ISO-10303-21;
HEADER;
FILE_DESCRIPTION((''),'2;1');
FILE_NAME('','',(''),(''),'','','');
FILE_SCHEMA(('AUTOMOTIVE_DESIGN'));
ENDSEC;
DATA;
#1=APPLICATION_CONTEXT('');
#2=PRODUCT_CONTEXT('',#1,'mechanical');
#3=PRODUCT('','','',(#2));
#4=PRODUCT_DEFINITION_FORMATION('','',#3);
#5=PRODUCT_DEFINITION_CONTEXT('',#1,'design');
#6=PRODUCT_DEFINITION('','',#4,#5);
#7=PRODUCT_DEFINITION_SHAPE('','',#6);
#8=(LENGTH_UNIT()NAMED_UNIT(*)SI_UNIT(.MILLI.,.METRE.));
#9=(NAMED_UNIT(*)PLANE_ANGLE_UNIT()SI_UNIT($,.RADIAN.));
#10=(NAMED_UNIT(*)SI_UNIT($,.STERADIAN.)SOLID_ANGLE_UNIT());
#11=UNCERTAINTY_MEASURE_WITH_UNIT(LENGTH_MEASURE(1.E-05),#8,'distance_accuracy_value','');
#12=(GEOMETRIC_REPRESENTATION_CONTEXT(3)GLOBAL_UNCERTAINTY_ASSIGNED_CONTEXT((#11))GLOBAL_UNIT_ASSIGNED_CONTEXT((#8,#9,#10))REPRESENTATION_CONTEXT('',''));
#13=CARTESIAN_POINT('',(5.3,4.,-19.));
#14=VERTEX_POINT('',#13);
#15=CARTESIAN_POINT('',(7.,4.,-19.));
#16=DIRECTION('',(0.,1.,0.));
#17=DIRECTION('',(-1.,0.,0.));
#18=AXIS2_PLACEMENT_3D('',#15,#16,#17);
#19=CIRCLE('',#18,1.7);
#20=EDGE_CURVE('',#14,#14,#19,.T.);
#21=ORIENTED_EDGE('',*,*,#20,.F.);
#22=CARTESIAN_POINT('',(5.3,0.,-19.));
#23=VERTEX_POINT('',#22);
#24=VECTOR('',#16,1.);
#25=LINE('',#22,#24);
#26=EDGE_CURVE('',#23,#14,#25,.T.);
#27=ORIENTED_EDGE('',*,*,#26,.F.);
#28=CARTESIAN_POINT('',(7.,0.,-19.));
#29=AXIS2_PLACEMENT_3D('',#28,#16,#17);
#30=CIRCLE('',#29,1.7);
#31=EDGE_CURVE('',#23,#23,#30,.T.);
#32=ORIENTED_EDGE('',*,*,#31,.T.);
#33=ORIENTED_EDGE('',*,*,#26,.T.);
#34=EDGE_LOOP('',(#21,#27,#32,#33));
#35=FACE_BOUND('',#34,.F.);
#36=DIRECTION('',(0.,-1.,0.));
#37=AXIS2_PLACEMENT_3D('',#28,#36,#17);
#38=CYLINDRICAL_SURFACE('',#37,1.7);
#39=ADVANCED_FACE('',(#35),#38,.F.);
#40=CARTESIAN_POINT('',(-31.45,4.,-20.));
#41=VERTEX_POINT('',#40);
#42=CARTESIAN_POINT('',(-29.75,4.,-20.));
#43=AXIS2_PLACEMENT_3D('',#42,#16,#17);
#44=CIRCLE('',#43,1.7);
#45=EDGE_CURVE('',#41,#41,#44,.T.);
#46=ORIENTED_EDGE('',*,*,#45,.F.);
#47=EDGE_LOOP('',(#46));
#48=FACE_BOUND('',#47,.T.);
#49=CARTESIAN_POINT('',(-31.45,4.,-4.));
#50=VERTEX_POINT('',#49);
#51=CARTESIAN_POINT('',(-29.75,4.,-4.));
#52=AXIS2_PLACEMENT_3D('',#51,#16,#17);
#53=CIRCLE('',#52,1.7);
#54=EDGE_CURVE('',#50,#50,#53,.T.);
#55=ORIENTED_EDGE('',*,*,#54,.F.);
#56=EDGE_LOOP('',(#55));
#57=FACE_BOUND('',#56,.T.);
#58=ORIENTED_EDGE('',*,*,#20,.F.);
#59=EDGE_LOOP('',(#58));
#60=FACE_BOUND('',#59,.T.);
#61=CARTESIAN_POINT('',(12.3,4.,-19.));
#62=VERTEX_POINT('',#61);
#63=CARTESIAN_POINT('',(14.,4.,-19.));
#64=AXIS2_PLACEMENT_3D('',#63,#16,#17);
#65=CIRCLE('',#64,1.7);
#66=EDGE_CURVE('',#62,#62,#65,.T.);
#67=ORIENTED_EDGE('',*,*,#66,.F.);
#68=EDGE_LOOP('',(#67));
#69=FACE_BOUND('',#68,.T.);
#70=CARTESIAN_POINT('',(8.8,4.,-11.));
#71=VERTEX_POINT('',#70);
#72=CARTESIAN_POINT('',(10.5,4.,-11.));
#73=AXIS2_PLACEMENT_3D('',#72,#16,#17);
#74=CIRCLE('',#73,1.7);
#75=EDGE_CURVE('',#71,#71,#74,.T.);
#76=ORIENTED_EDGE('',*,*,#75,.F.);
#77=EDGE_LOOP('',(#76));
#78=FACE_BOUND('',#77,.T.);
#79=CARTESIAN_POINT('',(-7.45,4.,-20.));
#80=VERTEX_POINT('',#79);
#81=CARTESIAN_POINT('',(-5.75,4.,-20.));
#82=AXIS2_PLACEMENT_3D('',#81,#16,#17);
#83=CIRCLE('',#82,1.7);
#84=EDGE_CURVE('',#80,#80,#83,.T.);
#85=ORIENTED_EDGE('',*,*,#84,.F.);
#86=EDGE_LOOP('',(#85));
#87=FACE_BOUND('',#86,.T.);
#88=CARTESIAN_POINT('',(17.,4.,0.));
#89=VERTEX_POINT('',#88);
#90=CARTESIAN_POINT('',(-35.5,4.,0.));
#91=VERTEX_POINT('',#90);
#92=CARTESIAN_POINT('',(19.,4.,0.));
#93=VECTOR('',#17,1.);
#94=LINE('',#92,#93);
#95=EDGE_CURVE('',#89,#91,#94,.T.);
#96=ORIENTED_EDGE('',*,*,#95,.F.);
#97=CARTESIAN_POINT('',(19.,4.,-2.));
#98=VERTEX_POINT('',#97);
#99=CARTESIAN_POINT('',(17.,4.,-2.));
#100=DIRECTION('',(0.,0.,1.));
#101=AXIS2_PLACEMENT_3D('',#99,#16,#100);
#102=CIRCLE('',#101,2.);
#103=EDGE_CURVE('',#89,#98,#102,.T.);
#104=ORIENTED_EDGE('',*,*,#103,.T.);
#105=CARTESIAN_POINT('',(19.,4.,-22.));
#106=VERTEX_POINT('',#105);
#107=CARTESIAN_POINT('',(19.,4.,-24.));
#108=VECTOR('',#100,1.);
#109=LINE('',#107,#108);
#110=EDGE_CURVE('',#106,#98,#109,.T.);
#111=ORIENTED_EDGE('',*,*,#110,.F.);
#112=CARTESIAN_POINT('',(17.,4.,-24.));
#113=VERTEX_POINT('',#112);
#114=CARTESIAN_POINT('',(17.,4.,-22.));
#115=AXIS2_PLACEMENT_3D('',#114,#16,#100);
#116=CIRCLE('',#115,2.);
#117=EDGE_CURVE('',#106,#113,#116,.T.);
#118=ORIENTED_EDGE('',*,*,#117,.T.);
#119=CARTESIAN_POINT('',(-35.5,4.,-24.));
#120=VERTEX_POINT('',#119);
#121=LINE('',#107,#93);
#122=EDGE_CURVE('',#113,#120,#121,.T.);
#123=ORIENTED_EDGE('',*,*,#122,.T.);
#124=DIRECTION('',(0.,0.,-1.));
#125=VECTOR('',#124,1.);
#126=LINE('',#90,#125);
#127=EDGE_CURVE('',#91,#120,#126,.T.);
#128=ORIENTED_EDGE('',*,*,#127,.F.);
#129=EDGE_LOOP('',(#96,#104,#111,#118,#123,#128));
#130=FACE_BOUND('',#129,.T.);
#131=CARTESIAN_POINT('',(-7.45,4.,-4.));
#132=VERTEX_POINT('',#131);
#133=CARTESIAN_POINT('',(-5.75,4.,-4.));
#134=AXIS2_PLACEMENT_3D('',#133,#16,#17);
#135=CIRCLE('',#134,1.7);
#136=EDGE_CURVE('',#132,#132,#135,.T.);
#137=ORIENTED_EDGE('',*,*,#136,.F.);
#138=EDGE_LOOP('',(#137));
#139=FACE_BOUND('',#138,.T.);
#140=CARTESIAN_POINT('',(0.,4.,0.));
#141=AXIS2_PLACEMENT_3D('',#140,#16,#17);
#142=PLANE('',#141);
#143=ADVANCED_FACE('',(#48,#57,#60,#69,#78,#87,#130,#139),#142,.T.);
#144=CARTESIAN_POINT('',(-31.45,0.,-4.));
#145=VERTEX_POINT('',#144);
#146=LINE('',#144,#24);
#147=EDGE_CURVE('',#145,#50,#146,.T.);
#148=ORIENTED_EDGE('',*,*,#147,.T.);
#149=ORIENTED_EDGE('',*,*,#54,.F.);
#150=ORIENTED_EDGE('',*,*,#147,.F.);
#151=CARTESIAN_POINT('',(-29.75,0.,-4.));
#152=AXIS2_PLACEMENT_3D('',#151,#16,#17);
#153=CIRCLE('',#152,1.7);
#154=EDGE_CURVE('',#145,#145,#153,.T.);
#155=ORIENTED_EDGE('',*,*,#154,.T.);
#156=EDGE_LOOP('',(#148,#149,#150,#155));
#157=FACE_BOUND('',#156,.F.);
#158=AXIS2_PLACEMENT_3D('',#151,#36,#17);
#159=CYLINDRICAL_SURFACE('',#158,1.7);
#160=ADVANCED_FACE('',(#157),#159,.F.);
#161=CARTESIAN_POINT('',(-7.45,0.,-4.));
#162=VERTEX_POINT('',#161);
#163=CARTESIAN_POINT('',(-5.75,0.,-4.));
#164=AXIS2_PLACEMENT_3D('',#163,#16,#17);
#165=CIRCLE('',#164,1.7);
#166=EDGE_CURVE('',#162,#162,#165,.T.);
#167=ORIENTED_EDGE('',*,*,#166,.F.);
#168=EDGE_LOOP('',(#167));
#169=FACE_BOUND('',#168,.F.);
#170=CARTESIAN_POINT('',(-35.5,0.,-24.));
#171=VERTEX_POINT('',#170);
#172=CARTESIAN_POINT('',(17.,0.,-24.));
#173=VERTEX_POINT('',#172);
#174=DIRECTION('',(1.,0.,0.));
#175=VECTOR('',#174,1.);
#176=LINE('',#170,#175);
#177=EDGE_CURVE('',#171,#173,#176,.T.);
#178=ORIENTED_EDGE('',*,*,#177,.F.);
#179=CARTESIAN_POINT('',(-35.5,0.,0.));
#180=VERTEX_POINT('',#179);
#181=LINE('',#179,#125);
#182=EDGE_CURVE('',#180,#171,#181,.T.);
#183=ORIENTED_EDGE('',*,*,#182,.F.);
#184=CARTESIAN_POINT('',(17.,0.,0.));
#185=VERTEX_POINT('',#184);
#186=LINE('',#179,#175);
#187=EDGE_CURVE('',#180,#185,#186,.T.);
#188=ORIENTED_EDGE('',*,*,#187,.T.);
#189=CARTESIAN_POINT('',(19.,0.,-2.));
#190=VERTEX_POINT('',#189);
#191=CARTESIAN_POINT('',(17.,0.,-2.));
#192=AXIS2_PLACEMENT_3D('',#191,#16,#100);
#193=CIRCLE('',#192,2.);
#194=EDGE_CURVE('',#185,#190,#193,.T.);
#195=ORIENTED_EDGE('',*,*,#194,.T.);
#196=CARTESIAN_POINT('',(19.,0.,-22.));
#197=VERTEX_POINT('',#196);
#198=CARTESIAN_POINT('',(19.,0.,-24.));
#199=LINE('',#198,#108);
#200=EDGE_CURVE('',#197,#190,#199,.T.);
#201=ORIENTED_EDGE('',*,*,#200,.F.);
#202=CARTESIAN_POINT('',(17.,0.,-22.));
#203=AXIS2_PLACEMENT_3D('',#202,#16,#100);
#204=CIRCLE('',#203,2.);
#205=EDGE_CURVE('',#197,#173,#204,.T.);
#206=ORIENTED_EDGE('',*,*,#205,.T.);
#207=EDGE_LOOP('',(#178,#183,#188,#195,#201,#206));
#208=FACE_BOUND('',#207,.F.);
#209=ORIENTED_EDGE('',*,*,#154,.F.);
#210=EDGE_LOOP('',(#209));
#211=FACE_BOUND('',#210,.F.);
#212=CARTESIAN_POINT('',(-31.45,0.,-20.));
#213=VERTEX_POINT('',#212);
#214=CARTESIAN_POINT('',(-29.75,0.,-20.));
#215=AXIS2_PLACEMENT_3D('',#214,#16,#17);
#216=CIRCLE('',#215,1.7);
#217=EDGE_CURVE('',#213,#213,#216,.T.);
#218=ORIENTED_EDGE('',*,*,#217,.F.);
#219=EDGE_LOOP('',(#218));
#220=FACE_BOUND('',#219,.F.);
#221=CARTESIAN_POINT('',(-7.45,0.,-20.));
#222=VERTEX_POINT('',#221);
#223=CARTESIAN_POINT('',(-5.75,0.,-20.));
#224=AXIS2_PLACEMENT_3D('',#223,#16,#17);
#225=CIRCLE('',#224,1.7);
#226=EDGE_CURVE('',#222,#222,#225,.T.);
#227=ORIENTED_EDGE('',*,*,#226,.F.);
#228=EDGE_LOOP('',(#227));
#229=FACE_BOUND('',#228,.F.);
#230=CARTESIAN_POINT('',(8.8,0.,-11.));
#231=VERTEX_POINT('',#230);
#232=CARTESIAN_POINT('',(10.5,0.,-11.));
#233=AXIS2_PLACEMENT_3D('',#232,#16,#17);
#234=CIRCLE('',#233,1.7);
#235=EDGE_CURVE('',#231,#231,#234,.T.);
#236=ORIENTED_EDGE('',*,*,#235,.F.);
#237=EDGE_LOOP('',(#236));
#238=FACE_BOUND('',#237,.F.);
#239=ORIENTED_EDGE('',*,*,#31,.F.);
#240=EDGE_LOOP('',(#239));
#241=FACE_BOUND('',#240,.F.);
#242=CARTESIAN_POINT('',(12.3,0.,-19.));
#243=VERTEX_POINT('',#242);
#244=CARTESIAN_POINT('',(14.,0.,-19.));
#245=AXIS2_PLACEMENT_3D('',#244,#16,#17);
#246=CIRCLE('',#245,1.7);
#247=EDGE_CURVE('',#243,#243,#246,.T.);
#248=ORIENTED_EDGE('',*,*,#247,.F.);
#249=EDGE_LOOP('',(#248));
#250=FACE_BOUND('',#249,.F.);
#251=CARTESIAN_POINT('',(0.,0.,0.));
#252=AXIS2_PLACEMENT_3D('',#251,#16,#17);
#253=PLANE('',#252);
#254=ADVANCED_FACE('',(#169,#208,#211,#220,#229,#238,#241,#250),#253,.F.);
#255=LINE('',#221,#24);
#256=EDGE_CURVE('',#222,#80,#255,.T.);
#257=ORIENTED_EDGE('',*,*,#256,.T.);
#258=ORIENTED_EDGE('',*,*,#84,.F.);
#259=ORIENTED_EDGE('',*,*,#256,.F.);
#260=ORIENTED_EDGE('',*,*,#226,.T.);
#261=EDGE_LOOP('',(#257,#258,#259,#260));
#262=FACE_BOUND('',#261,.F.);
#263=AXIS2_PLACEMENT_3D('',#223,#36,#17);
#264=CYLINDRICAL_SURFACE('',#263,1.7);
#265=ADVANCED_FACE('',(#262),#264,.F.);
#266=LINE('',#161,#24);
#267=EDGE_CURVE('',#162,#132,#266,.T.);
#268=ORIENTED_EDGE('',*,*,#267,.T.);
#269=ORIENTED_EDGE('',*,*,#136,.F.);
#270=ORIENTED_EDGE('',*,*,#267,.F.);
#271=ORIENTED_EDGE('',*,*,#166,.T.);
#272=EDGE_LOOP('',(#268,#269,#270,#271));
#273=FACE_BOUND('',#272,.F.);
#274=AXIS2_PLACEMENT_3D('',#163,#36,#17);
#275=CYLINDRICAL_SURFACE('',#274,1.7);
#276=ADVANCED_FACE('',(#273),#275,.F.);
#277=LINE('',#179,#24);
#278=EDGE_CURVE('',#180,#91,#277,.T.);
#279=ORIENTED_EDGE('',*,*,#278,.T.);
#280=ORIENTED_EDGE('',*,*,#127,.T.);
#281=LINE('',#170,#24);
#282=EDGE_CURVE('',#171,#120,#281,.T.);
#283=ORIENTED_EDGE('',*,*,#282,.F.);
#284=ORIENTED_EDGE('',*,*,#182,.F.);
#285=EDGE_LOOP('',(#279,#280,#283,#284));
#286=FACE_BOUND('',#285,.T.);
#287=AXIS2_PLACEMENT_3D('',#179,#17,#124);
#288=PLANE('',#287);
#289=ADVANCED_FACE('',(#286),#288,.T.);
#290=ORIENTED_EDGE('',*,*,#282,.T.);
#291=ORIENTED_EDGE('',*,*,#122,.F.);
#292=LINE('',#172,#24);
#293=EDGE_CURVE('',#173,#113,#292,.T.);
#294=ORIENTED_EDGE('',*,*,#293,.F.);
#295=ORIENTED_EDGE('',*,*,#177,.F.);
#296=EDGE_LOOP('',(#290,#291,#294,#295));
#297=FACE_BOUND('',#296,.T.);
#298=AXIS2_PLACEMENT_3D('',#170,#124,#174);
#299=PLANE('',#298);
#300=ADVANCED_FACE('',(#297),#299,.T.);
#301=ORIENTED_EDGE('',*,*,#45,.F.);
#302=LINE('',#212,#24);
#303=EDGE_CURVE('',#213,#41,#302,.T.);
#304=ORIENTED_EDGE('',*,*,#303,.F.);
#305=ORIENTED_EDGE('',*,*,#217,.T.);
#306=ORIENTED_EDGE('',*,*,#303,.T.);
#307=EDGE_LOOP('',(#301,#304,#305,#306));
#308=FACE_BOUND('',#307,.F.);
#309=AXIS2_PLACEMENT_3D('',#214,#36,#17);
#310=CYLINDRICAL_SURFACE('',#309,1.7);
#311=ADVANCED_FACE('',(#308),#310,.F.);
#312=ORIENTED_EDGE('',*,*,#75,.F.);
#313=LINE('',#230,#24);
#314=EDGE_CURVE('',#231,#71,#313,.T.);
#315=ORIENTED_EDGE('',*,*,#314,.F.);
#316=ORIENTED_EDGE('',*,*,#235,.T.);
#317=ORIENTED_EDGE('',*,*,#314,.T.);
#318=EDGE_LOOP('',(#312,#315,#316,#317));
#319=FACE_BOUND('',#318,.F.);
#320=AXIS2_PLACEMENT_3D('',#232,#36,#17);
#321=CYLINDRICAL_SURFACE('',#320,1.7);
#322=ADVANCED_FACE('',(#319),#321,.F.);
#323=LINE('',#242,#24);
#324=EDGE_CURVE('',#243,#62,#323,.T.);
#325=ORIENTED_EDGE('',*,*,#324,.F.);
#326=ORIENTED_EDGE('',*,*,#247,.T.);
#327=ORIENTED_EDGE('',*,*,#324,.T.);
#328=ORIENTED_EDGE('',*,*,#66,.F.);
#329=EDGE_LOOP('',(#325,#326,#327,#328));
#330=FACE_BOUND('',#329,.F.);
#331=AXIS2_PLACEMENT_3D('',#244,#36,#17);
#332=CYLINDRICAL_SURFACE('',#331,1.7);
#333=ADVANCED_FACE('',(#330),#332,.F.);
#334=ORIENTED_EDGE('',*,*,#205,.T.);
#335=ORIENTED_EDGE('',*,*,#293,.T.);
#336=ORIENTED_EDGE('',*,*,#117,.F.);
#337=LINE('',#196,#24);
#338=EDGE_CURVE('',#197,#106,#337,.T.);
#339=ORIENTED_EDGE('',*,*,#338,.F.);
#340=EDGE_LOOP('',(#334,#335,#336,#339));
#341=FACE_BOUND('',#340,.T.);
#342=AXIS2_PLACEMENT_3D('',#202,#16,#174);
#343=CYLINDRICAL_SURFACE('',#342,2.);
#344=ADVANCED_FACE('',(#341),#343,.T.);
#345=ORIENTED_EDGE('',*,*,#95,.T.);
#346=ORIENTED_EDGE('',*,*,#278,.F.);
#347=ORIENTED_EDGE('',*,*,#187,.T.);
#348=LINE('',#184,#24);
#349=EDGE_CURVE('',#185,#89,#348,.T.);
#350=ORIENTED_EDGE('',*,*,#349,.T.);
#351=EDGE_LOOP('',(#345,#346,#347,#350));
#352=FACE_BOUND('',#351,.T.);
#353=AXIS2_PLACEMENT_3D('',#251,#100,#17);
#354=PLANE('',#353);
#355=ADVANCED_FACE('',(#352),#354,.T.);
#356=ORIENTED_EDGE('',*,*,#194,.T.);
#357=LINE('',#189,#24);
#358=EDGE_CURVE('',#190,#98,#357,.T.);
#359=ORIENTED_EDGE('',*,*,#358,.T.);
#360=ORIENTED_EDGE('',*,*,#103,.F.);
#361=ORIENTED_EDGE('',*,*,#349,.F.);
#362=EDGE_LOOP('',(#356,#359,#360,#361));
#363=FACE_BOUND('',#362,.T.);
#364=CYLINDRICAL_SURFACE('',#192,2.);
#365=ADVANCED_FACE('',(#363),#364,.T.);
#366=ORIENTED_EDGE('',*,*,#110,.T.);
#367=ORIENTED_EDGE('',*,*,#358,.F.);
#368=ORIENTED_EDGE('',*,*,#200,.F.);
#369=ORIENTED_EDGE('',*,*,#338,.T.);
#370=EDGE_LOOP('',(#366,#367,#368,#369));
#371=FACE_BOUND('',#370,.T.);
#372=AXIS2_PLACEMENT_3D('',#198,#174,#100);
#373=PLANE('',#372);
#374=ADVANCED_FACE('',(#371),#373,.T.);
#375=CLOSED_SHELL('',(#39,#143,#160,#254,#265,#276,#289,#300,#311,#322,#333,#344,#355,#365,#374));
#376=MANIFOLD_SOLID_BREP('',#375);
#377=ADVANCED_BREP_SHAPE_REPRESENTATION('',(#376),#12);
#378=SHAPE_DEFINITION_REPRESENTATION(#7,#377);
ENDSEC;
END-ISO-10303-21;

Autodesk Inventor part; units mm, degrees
ref_plane "YZ Plane" through (0, 0, 0) normal (1, 0, 0) x (0, 1, 0)
ref_plane "XZ Plane" through (0, 0, 0) normal (0, 1, 0) x (-1, 0, 0)
ref_plane "XY Plane" through (0, 0, 0) normal (0, 0, 1) x (1, 0, 0)
sketch "Sketch1" plane through (0, 0, 0) normal (0, 1, 0) x (-1, 0, 0)
  line L0 (0, 0) -> (35.5, 0)
  line L1 (35.5, 0) -> (35.5, -24)
  line L2 (35.5, -24) -> (0, -24)
  line L3 (0, -24) -> (0, 0)
  circle A0 centre (5.75, -20) radius 1.7
  circle A1 centre (5.75, -4) radius 1.7
  circle A2 centre (29.75, -20) radius 1.7
  circle A3 centre (29.75, -4) radius 1.7
  line L4 (0, -24) -> (-19, -24)
  line L5 (-19, -24) -> (-19, 0)
  line L6 (-19, 0) -> (0, 0)
  line L7 (0, 0) -> (0, -24)
  circle A4 centre (-14, -19) radius 1.7
  circle A5 centre (-7, -19) radius 1.7
  circle A6 centre (-10.5, -11) radius 1.7
  line L8 (35.5, -24) -> (35.5, 0)
  dimension "d0" = 35.5
  dimension "d1" = 24
  dimension "d2" = 3.4
  dimension "d3" = 4
  dimension "d4" = 5.75
  dimension "d5" = 3.4
  dimension "d6" = 16
  dimension "d7" = 3.4
  dimension "d8" = 4
  dimension "d9" = 5.75
  dimension "d10" = 3.4
  dimension "d11" = 16
  dimension "d12" = 19
  dimension "d13" = 24
  dimension "d14" = 3.4
  dimension "d15" = 5
  dimension "d16" = 5
  dimension "d17" = 3.4
  dimension "d18" = 7
  dimension "d19" = 3.4
  dimension "d20" = 8
  dimension "d21" = 3.5
  dimension "d35" = 24
extrude "Extrusion1" add sketch "Sketch1" along normal blind 4
fillet "Fillet1" radius 2 2 edges at (19, 2, 0) (19, 2, -24)
properties part number "drag chain mount"
